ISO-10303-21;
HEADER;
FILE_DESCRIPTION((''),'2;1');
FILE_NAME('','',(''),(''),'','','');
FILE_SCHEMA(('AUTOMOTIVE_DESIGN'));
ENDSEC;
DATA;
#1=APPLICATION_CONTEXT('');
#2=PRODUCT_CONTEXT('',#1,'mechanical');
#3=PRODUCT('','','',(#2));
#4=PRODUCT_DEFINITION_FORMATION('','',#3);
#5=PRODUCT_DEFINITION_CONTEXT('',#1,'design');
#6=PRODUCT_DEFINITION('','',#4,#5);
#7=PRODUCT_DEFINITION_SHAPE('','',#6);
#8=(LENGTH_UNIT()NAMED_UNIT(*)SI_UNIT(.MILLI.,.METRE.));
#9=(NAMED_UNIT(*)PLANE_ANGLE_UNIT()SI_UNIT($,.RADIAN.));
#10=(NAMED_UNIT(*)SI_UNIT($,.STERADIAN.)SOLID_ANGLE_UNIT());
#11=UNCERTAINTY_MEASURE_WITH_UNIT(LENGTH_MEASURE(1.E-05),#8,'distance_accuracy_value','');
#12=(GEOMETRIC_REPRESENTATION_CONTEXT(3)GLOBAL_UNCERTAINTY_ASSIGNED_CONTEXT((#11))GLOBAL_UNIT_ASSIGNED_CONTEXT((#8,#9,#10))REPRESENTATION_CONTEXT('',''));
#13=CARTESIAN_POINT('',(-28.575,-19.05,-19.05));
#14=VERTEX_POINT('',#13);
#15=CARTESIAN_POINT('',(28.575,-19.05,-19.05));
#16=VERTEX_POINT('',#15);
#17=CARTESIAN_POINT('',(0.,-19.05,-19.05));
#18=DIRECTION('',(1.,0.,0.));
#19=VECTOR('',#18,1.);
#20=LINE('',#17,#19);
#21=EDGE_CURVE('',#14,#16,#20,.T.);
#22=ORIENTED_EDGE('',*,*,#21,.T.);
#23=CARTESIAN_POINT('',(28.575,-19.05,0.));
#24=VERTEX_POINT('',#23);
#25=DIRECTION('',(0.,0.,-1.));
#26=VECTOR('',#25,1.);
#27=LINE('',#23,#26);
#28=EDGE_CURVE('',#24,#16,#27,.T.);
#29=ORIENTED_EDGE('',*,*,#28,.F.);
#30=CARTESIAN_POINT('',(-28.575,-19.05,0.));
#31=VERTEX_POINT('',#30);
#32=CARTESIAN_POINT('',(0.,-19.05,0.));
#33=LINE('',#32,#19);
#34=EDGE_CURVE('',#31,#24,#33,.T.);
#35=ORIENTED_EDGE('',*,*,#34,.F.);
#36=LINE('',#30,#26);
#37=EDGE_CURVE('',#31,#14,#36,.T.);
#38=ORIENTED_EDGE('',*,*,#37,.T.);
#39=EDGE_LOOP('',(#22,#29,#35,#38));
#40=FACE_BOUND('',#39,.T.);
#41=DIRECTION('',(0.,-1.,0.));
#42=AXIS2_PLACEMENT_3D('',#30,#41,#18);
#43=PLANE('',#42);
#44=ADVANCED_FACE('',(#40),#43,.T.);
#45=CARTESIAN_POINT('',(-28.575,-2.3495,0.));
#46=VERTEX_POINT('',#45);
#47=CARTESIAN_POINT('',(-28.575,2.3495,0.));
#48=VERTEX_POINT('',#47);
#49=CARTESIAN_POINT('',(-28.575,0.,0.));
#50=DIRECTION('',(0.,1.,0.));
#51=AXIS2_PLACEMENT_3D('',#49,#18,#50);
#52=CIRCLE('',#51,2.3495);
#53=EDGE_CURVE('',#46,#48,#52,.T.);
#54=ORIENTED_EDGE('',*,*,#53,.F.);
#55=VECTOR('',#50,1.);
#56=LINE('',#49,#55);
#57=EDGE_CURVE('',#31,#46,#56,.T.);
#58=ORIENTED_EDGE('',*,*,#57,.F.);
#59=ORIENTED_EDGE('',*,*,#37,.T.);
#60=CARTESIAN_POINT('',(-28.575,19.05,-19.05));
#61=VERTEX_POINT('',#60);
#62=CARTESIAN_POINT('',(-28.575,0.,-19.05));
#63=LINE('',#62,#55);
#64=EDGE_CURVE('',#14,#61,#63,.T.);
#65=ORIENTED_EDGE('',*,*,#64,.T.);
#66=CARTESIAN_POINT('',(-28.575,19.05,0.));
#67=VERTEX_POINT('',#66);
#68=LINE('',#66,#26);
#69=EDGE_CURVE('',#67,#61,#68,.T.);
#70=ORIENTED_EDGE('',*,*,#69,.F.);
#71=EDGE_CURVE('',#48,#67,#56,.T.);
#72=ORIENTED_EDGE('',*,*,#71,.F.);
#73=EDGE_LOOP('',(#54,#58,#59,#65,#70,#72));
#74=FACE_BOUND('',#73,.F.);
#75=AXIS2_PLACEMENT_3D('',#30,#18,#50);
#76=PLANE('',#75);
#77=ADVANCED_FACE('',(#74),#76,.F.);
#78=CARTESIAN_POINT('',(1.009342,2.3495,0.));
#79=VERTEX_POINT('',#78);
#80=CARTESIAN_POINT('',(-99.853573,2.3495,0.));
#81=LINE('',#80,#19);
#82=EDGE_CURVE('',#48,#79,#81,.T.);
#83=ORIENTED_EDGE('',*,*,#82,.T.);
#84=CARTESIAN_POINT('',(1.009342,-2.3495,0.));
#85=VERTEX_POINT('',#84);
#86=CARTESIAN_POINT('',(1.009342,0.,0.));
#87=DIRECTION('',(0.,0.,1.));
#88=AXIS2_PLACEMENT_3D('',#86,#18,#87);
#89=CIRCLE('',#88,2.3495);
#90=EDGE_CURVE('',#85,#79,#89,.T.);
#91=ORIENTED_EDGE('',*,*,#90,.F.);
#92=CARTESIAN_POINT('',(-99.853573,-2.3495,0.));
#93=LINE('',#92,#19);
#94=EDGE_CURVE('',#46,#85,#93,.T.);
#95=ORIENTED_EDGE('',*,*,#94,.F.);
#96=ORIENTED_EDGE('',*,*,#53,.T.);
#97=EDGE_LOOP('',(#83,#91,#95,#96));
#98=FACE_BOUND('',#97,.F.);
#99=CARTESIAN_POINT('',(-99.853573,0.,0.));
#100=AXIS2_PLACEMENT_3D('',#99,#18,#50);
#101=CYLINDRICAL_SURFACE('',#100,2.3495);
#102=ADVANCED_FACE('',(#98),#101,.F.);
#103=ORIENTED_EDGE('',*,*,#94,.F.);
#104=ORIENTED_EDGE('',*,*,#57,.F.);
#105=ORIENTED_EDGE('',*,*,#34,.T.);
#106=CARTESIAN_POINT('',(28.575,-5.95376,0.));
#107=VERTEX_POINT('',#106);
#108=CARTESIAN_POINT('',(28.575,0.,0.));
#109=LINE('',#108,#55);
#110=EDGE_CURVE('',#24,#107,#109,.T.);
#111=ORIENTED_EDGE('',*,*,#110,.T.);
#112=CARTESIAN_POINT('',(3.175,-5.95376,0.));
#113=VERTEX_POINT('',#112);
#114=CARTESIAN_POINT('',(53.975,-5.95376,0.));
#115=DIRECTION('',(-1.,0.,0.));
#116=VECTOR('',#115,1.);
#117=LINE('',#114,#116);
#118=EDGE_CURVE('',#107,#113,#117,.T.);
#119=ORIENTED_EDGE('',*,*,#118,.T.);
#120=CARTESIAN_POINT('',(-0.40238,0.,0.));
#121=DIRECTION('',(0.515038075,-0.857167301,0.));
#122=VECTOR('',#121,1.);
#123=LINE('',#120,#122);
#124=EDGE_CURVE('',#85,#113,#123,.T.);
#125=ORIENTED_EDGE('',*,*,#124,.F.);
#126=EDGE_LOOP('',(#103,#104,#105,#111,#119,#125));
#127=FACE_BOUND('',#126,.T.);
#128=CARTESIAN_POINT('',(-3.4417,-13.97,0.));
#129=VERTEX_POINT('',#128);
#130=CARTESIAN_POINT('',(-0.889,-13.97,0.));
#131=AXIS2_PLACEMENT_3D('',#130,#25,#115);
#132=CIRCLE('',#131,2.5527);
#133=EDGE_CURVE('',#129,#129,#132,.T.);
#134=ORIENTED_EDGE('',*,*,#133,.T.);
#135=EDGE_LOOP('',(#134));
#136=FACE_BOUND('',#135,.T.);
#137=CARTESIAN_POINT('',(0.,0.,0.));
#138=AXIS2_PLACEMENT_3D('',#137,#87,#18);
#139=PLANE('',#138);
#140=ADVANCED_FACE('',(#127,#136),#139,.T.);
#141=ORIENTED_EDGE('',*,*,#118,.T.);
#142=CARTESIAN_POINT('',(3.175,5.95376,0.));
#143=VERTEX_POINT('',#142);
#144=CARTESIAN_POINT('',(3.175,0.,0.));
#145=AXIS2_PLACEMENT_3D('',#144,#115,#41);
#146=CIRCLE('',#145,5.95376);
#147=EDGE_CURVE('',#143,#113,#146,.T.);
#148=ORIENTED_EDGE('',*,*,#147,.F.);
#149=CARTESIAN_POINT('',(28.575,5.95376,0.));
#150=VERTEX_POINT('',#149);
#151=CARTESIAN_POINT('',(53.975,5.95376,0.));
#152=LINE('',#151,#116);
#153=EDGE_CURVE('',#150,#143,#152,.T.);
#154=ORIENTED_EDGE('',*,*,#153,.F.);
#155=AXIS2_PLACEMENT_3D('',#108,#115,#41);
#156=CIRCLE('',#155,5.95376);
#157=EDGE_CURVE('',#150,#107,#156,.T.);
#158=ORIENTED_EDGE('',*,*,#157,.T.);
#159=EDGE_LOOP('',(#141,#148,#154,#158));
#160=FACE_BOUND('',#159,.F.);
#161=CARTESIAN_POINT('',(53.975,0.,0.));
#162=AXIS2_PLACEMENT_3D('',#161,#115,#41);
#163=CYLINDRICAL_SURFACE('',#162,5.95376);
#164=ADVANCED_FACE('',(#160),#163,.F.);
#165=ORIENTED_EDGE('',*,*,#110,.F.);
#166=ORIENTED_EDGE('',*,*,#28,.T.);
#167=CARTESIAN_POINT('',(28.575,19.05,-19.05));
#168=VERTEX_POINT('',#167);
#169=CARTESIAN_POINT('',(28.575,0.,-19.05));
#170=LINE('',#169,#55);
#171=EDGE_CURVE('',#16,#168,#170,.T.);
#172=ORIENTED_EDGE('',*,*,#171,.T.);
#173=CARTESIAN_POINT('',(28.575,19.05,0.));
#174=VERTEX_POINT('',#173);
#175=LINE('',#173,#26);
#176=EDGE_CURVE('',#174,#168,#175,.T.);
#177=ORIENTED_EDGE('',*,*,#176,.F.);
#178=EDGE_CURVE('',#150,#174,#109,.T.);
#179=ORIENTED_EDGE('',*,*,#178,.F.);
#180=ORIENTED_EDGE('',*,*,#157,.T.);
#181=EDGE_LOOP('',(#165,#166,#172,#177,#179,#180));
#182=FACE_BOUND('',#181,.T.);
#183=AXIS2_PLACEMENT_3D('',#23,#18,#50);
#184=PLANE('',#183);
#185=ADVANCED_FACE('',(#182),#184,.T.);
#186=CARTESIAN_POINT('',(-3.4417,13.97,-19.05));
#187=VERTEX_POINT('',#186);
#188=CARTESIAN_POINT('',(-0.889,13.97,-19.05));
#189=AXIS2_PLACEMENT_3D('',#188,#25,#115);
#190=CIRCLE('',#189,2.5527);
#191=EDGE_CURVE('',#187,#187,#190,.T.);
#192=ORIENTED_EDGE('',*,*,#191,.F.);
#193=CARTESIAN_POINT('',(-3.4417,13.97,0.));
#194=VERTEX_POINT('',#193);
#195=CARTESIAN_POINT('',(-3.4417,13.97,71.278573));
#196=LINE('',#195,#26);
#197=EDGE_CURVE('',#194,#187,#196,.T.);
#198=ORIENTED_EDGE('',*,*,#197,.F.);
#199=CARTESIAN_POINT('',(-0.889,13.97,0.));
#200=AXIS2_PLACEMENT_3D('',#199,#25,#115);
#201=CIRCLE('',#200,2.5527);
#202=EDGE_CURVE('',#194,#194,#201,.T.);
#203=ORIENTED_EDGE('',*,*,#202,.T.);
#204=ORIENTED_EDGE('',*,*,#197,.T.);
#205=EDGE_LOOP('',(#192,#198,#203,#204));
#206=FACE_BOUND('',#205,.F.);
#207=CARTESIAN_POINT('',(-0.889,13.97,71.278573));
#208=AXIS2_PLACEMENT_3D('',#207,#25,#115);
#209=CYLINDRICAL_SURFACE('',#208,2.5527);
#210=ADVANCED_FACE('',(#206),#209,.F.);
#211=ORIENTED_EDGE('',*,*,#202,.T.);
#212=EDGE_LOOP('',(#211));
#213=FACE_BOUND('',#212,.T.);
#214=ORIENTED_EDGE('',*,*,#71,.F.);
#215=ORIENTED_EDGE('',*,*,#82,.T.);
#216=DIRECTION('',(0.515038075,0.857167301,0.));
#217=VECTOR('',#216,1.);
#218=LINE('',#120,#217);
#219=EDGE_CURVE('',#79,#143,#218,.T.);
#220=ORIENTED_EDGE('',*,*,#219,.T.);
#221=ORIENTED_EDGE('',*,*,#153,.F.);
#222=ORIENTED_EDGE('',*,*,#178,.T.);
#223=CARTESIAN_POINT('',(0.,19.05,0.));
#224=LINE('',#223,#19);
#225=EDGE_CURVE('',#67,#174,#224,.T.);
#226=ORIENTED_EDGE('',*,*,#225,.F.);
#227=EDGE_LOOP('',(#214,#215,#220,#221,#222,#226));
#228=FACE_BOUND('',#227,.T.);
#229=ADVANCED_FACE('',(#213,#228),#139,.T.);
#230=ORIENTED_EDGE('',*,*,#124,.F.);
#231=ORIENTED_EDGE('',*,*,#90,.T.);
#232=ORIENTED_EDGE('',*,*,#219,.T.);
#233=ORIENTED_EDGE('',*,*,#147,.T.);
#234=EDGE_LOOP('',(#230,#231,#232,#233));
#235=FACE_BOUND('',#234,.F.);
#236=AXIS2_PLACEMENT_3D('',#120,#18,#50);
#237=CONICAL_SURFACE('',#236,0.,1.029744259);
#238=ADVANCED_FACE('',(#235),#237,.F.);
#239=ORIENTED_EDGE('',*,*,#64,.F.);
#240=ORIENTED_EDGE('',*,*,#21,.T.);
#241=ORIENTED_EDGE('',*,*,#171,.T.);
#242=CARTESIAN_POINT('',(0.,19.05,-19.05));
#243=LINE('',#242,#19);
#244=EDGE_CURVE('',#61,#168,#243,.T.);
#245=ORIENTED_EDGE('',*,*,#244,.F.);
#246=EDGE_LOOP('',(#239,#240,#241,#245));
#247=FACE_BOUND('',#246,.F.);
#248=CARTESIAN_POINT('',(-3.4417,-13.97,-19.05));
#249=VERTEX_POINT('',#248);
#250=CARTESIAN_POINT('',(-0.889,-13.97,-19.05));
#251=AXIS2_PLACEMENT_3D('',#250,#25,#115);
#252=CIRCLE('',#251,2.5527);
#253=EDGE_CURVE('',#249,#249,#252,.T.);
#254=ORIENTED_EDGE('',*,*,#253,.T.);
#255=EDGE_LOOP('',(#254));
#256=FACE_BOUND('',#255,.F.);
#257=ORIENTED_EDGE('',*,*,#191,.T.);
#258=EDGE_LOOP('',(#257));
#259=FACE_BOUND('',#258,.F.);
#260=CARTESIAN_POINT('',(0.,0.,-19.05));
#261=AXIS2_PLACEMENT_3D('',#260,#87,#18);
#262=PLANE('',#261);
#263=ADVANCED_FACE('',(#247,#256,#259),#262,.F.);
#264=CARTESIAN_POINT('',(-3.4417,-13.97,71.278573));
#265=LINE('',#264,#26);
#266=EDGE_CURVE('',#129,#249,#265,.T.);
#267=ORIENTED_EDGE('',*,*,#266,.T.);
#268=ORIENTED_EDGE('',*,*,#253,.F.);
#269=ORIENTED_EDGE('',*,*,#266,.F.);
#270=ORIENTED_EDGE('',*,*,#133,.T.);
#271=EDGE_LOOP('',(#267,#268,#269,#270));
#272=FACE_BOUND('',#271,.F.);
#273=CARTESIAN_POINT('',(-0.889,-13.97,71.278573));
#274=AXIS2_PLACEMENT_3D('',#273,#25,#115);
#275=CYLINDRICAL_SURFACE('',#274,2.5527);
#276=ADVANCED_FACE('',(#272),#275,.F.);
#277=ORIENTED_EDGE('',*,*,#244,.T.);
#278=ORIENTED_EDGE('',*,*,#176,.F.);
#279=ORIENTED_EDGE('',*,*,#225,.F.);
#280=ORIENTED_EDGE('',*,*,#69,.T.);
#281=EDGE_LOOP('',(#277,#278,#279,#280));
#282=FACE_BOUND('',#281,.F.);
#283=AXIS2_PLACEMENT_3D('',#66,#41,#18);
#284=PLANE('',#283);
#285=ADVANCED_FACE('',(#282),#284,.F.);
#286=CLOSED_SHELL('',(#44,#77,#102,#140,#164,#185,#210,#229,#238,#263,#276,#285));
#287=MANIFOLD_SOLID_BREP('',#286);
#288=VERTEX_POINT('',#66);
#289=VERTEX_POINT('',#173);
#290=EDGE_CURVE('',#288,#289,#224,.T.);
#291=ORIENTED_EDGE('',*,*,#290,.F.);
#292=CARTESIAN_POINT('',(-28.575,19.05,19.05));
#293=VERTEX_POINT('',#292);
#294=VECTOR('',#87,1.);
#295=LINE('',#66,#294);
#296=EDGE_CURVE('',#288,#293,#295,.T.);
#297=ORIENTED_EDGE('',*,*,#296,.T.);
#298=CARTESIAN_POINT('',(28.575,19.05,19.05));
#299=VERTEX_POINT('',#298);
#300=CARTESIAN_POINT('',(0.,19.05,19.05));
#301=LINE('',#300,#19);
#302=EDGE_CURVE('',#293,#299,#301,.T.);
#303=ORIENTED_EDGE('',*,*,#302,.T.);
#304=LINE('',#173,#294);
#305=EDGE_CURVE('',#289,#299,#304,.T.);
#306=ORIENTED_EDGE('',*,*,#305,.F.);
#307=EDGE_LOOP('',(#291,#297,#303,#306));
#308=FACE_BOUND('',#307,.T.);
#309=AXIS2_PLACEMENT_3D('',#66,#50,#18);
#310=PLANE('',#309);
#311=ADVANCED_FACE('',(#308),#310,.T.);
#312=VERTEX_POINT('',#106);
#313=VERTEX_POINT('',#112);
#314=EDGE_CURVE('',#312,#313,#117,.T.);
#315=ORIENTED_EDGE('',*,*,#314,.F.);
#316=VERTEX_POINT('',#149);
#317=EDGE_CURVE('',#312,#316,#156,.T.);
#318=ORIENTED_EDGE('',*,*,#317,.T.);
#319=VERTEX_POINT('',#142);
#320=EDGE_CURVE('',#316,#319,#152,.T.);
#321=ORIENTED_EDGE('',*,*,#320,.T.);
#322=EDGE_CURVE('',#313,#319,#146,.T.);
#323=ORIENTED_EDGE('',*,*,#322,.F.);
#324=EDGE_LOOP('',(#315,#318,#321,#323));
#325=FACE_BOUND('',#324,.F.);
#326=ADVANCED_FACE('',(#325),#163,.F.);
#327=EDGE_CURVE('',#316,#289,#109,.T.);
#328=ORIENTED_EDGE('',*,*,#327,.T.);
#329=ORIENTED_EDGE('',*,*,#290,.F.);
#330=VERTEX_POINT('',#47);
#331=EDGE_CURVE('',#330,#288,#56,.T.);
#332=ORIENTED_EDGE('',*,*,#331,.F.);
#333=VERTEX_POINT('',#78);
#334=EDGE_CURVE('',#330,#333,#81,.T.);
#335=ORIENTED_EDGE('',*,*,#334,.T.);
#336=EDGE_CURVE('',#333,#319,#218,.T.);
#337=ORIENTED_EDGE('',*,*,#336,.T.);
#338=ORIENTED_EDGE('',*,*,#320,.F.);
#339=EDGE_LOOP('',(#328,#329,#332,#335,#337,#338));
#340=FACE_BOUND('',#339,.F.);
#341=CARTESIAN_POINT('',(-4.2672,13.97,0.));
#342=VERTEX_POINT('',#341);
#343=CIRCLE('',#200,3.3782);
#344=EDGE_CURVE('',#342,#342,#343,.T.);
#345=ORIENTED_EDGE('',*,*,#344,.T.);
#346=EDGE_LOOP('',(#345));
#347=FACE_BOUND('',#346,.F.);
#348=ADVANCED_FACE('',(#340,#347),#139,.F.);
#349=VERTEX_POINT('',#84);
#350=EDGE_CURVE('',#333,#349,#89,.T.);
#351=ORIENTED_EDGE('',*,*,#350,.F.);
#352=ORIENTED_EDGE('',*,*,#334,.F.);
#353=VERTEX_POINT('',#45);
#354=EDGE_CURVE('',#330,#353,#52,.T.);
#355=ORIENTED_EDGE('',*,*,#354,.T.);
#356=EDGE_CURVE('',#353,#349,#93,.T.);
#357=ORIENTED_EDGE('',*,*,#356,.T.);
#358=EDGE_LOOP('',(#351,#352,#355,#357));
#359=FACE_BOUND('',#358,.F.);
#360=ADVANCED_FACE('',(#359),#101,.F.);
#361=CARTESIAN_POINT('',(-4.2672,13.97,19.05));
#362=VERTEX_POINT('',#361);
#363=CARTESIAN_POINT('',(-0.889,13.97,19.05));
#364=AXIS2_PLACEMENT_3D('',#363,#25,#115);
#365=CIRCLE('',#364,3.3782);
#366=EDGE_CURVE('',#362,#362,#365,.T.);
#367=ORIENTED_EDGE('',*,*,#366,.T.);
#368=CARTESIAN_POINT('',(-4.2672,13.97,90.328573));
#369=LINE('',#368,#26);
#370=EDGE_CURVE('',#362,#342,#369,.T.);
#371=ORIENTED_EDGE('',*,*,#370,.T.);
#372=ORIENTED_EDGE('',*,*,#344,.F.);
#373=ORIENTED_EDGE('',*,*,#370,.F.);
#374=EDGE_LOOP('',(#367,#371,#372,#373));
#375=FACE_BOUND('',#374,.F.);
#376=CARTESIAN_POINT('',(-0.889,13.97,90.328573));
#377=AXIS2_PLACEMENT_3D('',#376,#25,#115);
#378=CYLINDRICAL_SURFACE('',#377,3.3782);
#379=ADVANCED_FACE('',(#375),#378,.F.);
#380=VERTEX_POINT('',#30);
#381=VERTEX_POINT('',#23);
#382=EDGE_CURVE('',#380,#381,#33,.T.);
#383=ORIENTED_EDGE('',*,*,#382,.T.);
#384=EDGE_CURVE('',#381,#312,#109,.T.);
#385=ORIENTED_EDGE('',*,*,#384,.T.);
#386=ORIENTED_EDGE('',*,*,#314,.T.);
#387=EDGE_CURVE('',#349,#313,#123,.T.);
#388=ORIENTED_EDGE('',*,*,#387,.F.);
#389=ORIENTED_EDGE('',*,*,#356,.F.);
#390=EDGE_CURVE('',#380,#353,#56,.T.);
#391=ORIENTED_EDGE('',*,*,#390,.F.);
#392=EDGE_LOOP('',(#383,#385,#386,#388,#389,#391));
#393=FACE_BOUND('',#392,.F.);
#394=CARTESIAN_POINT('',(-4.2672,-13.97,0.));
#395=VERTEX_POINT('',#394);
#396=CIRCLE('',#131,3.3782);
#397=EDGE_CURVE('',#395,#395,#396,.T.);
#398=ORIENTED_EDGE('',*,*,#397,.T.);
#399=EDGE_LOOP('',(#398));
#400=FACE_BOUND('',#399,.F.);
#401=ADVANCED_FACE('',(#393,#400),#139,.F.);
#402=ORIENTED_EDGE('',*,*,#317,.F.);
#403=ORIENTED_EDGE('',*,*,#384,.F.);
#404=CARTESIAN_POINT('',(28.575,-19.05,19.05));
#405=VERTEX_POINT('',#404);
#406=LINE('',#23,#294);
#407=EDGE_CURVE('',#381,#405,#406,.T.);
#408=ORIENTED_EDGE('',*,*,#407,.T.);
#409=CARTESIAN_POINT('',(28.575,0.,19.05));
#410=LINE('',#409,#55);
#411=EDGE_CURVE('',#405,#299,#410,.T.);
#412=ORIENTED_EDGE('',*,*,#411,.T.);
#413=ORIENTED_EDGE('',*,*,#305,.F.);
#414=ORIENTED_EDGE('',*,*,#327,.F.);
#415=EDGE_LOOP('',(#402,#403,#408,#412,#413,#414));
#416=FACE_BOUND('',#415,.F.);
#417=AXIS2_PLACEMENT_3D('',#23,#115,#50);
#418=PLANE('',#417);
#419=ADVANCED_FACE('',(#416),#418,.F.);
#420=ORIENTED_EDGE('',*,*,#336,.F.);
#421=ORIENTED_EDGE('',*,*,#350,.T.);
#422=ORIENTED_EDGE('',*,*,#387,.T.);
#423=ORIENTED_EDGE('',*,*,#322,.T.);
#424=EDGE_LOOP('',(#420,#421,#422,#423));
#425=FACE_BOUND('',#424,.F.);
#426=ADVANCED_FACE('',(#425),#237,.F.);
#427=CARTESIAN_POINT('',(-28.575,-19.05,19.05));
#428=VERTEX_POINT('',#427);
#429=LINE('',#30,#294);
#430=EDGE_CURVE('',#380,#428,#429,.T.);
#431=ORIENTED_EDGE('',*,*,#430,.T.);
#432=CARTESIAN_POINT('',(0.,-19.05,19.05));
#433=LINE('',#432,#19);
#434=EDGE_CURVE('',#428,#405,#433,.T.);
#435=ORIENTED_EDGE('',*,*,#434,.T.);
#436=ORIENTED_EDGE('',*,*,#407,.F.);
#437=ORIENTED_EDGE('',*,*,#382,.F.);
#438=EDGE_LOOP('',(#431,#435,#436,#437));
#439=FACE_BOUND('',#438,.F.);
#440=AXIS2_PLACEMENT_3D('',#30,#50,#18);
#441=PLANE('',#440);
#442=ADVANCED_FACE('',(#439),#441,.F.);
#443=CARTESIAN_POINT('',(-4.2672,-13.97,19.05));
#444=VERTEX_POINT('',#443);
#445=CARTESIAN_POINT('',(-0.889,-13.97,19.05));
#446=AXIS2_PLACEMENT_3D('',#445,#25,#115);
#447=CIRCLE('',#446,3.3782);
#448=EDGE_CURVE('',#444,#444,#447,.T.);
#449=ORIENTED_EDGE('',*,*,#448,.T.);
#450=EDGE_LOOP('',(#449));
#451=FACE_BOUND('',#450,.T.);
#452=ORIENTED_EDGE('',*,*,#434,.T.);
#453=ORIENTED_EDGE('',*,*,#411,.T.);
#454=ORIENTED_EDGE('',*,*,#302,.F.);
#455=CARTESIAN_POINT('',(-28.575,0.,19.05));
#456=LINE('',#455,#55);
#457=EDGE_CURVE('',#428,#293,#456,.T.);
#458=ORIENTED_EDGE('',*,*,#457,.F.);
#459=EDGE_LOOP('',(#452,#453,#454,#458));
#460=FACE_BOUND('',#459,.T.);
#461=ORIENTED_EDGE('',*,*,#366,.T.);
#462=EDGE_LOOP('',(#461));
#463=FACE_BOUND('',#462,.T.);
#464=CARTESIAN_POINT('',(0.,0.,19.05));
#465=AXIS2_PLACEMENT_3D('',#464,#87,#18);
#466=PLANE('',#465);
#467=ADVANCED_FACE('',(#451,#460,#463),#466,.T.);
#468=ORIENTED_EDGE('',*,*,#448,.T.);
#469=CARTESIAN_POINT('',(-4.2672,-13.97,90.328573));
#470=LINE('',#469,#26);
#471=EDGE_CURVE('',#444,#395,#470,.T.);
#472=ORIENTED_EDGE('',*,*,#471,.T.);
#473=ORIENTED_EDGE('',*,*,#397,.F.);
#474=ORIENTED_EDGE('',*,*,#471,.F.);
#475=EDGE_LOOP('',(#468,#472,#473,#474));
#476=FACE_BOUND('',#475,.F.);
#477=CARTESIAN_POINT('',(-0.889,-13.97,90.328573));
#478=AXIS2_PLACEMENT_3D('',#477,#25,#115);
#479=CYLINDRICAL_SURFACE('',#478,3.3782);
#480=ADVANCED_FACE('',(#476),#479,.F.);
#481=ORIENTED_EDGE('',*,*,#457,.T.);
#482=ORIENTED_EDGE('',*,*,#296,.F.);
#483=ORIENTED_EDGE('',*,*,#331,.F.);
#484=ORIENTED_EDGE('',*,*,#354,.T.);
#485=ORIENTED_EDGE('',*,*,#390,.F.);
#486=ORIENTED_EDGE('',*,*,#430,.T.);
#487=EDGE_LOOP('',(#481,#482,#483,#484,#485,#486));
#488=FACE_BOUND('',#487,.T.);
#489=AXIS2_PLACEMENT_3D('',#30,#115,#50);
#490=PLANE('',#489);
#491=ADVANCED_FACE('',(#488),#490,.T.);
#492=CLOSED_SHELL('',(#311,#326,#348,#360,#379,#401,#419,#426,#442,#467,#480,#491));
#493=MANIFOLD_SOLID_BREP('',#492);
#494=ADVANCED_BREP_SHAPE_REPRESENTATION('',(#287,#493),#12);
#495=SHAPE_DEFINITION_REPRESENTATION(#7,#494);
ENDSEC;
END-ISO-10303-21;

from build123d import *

# Parameters (mm, degrees)
F3_W       = 57.15
F3_H       = 38.1
F4_DEPTH   = 19.05
F5_DEPTH   = 19.05
F7_D       = 11.90752
F7_DEPTH   = 25.4
F7_TIP     = 3.5773799191
F7_2_D     = 11.90752
F7_2_DEPTH = 25.4
F7_2_TIP   = 3.5773799191
F9_D       = 4.699
F9_2_D     = 4.699
F11_D      = 6.7564
F13_D      = 5.1054


# Not quite as in the source:
# - a variable given as a bare number and used for a length is read in inches; the dataset says mm whatever the document's units were


with BuildPart() as f4:
    # F3 (on Top) → F4 (new body)
    with BuildSketch(Plane.XY):
        Rectangle(F3_W, F3_H)
    extrude(amount=F4_DEPTH)

    # F7
    with Locations(Plane.YZ.offset(28.575)):
        with Locations((0, 0)):
            Hole(F7_D / 2, depth=F7_DEPTH)
            with Locations((0, 0, -(F7_DEPTH + F7_TIP / 2))):  # 118° drill point
                Cone(0, F7_D / 2, F7_TIP, mode=Mode.SUBTRACT)

    # F9 (through all)
    with Locations(Plane(origin=(-28.575, 0, 0), x_dir=(0, -1, 0), z_dir=(-1, 0, 0))):
        with Locations((0, 0)):
            Hole(F9_D / 2)

    # F11 (through all)
    with Locations(Plane.XY.offset(19.05)):
        with Locations((-0.889, -13.97), (-0.889, 13.97)):
            Hole(F11_D / 2)


with BuildPart() as f5:
    # F3 (on Top) → F5 (new body)
    with BuildSketch(Plane.XY):
        Rectangle(F3_W, F3_H)
    extrude(amount=-F5_DEPTH)

    # F7#2
    with Locations(Plane.YZ.offset(28.575)):
        with Locations((0, 0)):
            Hole(F7_2_D / 2, depth=F7_2_DEPTH)
            with Locations((0, 0, -(F7_2_DEPTH + F7_2_TIP / 2))):  # 118° drill point
                Cone(0, F7_2_D / 2, F7_2_TIP, mode=Mode.SUBTRACT)

    # F9#2 (through all)
    with Locations(Plane(origin=(-28.575, 0, 0), x_dir=(0, -1, 0), z_dir=(-1, 0, 0))):
        with Locations((0, 0)):
            Hole(F9_2_D / 2)

    # F13 (through all)
    with Locations(Plane.XY):
        with Locations((-0.889, 13.97), (-0.889, -13.97)):
            Hole(F13_D / 2)


solid = Compound([f4.part, f5.part])
